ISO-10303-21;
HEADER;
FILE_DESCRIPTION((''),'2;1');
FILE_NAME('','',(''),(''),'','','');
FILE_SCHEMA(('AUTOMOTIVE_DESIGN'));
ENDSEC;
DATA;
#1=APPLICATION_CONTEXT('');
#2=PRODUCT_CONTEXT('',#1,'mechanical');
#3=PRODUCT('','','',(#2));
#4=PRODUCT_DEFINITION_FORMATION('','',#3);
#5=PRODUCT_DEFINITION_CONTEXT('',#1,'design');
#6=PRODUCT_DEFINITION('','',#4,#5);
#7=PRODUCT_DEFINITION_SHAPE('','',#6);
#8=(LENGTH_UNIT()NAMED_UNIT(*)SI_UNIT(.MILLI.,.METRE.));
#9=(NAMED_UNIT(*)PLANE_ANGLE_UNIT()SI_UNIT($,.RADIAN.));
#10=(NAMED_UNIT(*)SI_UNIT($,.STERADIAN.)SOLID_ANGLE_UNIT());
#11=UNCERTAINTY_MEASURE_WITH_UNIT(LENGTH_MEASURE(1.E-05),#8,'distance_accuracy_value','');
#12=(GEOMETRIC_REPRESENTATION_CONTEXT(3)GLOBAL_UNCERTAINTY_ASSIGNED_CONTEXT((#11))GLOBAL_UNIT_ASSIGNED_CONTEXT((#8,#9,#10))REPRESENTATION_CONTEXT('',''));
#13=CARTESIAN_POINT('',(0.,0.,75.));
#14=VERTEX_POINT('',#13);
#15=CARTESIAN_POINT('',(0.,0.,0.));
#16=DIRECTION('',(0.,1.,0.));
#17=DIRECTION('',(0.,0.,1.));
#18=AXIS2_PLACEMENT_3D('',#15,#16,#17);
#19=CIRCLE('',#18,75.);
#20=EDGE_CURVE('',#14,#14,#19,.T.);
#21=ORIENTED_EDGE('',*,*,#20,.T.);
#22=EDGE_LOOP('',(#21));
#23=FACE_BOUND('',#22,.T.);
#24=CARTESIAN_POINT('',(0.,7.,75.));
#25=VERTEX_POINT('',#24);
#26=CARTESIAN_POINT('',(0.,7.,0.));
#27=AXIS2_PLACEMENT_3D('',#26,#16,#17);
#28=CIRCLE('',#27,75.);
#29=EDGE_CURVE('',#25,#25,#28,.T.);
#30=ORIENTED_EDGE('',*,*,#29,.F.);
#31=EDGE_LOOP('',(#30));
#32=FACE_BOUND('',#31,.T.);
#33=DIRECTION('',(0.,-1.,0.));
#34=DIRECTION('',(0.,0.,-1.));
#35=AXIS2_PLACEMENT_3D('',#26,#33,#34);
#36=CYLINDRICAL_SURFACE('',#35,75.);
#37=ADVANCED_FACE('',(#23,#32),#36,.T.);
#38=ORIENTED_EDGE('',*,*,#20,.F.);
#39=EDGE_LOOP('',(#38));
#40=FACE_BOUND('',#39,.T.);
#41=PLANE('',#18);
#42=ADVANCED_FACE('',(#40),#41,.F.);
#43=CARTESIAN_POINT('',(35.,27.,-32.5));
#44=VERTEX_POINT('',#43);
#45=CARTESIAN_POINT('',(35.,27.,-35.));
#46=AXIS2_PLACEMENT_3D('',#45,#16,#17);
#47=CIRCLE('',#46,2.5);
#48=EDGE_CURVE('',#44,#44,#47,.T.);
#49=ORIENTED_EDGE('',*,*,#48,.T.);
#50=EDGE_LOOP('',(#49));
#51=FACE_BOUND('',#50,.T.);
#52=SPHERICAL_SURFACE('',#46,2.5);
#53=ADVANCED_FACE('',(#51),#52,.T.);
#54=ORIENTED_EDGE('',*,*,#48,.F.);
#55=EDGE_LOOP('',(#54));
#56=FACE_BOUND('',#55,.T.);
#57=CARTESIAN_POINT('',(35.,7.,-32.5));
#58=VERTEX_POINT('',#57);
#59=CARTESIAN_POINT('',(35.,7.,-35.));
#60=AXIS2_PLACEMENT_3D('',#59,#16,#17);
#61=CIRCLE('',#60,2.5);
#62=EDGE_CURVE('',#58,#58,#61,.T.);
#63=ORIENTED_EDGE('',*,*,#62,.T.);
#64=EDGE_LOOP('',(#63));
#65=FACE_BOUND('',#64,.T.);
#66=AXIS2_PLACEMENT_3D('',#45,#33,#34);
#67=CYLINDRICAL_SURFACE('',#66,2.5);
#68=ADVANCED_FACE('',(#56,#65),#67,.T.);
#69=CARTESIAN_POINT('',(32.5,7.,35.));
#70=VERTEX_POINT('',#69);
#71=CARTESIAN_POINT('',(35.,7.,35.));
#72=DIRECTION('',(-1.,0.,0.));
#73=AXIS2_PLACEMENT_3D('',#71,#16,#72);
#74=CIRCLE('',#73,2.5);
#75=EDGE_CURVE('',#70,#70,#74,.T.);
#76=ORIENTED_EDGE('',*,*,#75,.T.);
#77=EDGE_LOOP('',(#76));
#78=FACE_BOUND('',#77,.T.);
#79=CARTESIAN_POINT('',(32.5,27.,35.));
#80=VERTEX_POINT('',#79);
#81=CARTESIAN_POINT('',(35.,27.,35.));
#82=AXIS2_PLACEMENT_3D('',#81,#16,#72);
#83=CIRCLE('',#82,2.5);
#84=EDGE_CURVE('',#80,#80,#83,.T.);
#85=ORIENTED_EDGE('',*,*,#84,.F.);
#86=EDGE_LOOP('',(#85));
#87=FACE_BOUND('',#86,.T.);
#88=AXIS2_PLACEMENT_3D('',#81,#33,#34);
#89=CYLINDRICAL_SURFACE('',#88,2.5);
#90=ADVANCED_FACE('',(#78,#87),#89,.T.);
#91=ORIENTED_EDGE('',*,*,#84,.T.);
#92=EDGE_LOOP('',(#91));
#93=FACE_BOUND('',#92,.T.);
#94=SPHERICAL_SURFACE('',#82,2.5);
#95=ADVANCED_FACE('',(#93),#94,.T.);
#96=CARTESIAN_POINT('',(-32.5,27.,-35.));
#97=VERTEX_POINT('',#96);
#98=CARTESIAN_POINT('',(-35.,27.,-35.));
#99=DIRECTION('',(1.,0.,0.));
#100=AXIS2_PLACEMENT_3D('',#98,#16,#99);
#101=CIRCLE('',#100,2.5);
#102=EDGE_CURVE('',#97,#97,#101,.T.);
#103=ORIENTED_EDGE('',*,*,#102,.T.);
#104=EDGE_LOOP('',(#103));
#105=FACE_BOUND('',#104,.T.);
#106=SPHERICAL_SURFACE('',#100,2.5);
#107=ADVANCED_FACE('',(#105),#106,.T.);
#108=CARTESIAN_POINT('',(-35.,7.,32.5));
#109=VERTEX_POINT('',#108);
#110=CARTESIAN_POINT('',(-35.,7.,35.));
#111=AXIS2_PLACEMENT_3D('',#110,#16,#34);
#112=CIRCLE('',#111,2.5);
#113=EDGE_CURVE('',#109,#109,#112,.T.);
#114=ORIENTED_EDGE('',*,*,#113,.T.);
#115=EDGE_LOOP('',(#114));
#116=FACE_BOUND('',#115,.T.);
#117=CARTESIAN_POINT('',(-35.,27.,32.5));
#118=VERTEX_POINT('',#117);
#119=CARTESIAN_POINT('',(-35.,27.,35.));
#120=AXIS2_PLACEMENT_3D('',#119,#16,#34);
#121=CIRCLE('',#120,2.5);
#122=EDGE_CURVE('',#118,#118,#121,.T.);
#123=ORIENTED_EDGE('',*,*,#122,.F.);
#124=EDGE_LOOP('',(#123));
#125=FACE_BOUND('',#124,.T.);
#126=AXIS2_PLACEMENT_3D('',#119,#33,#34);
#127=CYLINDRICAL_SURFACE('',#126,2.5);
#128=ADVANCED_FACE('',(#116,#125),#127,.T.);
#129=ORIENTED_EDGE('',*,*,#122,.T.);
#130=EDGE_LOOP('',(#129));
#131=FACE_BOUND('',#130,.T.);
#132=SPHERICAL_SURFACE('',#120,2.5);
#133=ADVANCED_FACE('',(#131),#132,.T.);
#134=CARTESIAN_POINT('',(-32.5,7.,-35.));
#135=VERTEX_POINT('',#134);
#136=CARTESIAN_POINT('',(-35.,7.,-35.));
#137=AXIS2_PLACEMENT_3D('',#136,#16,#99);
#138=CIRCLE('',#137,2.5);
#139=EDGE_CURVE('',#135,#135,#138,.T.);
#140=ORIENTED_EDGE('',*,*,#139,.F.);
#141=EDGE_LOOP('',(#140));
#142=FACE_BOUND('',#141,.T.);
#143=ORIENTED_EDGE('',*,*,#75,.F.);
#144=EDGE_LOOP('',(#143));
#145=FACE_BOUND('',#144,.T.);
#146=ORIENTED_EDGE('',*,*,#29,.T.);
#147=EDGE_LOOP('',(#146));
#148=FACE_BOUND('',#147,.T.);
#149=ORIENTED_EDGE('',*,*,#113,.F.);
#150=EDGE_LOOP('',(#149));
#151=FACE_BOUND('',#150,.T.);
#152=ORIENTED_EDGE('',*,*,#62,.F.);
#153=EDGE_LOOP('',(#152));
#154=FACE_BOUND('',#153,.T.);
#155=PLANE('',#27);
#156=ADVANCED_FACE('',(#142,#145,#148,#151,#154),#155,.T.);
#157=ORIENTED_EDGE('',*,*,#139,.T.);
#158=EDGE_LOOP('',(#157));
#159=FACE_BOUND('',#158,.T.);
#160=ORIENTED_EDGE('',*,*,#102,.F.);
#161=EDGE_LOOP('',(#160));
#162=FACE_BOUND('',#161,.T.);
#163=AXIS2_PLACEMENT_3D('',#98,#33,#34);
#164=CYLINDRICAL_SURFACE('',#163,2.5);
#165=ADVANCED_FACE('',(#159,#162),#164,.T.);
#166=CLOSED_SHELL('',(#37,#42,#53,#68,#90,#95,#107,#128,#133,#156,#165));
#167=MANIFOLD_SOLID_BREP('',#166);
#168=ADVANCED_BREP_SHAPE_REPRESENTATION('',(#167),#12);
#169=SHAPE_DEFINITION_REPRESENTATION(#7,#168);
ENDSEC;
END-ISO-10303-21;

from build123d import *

# Parameters (mm, degrees)
SKETCH1_R           = 75
BOSS_EXTRUDE1_DEPTH = 7
SKETCH2_R           = 2.5
BOSS_EXTRUDE2_DEPTH = 20
CIRPATTERN1_COUNT   = 4
CIRPATTERN3_COUNT   = 4


# Read off the part's stored shape, not the designer's step: Dome1
with BuildPart() as part:
    # Sketch1 → Boss-Extrude1 (new body)
    with BuildSketch(Plane(origin=(0, 0, 0), x_dir=(1, 0, 0), z_dir=(0, 1, 0))):
        with Locations(Location((0, 0, 0), (0, 0, 270))):
            Circle(SKETCH1_R)
    extrude(amount=BOSS_EXTRUDE1_DEPTH)

    # Sketch2 → Boss-Extrude2 (add)
    with BuildSketch(Plane(origin=(0, 7, 0), x_dir=(1, 0, 0), z_dir=(0, 1, 0))):
        with Locations(Location((35, 35, 0), (0, 0, 270))):
            Circle(SKETCH2_R)
    boss_extrude2 = extrude(amount=BOSS_EXTRUDE2_DEPTH)

    # CirPattern1: Boss-Extrude2 ×4 about axis
    cirpattern1_axis = Axis((0, 0, 0), (0, 1, 0))
    for i in range(1, CIRPATTERN1_COUNT):
        add(boss_extrude2.rotate(cirpattern1_axis, i * 360 / CIRPATTERN1_COUNT))

    # Dome1 outline → Dome1 (revolve)
    with BuildSketch(Plane(origin=(-35, 0, -35), x_dir=(1, 0, 0), z_dir=(0, 0, 1))):
        with BuildLine():
            Line((0, 27), (2.5, 26.999999997))
            ThreePointArc((2.5, 26.999999997), (1.767766954, 28.767766952), (0, 29.5))
            Line((0, 29.5), (0, 27))
        make_face()
    dome1 = revolve(axis=Axis((-35, 0, -35), (0, 1, 0)))

    # CirPattern3: Dome1 ×4 about axis
    cirpattern3_axis = Axis((0, 0, 0), (0, 1, 0))
    for i in range(1, CIRPATTERN3_COUNT):
        add(dome1.rotate(cirpattern3_axis, i * 360 / CIRPATTERN3_COUNT))


solid = part.part
